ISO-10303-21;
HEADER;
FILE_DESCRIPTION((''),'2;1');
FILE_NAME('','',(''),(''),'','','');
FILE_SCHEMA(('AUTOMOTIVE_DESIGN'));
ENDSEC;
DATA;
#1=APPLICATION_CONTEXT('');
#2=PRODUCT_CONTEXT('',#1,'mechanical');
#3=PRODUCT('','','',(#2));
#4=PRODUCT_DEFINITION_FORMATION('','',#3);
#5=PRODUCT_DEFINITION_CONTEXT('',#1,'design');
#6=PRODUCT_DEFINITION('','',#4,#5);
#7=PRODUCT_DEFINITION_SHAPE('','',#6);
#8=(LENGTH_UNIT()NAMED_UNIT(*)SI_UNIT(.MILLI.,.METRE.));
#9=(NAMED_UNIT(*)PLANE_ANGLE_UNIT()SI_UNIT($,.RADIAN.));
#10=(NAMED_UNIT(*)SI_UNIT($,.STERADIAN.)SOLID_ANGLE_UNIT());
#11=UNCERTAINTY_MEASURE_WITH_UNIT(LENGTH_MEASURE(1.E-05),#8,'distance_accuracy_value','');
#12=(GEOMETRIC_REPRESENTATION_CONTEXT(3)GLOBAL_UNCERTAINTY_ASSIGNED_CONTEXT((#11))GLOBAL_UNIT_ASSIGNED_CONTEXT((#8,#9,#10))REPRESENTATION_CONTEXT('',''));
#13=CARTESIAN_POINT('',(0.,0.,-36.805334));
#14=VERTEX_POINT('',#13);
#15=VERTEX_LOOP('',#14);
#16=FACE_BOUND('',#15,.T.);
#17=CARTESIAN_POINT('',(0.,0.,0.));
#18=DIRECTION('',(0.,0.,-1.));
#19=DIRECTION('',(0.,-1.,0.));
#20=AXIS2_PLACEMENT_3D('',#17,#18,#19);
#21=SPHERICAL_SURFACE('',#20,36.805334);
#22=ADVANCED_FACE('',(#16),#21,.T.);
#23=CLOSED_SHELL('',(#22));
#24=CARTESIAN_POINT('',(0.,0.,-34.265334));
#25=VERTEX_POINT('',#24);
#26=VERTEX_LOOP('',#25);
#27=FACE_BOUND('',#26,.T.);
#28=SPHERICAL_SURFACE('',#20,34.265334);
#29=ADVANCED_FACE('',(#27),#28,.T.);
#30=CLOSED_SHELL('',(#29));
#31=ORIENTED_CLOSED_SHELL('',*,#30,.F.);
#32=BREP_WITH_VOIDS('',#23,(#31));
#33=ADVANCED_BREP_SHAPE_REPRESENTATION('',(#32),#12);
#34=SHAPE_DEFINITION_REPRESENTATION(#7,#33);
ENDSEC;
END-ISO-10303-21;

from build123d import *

# Parameters (mm, degrees)
F4_T = -2.54


# Not quite as in the source:
# - the program builds the solid bodies; features that only make, move or delete a surface that nothing else refers to are left out


with BuildPart() as f1:
    # F0 (on Right) → F1 (revolve)
    with BuildSketch(Plane.YZ):
        with BuildLine():
            Line((0, -36.8053336478), (0, 36.8053336478))
            ThreePointArc((0, 36.8053336478), (-36.8053336478, 0), (0, -36.8053336478))
        make_face()
    revolve(axis=Axis((0, 0, 0), (0, 0, -1)))

    # F4 (hollow: no face is removed)
    offset(amount=F4_T, mode=Mode.SUBTRACT)


solid = f1.part
